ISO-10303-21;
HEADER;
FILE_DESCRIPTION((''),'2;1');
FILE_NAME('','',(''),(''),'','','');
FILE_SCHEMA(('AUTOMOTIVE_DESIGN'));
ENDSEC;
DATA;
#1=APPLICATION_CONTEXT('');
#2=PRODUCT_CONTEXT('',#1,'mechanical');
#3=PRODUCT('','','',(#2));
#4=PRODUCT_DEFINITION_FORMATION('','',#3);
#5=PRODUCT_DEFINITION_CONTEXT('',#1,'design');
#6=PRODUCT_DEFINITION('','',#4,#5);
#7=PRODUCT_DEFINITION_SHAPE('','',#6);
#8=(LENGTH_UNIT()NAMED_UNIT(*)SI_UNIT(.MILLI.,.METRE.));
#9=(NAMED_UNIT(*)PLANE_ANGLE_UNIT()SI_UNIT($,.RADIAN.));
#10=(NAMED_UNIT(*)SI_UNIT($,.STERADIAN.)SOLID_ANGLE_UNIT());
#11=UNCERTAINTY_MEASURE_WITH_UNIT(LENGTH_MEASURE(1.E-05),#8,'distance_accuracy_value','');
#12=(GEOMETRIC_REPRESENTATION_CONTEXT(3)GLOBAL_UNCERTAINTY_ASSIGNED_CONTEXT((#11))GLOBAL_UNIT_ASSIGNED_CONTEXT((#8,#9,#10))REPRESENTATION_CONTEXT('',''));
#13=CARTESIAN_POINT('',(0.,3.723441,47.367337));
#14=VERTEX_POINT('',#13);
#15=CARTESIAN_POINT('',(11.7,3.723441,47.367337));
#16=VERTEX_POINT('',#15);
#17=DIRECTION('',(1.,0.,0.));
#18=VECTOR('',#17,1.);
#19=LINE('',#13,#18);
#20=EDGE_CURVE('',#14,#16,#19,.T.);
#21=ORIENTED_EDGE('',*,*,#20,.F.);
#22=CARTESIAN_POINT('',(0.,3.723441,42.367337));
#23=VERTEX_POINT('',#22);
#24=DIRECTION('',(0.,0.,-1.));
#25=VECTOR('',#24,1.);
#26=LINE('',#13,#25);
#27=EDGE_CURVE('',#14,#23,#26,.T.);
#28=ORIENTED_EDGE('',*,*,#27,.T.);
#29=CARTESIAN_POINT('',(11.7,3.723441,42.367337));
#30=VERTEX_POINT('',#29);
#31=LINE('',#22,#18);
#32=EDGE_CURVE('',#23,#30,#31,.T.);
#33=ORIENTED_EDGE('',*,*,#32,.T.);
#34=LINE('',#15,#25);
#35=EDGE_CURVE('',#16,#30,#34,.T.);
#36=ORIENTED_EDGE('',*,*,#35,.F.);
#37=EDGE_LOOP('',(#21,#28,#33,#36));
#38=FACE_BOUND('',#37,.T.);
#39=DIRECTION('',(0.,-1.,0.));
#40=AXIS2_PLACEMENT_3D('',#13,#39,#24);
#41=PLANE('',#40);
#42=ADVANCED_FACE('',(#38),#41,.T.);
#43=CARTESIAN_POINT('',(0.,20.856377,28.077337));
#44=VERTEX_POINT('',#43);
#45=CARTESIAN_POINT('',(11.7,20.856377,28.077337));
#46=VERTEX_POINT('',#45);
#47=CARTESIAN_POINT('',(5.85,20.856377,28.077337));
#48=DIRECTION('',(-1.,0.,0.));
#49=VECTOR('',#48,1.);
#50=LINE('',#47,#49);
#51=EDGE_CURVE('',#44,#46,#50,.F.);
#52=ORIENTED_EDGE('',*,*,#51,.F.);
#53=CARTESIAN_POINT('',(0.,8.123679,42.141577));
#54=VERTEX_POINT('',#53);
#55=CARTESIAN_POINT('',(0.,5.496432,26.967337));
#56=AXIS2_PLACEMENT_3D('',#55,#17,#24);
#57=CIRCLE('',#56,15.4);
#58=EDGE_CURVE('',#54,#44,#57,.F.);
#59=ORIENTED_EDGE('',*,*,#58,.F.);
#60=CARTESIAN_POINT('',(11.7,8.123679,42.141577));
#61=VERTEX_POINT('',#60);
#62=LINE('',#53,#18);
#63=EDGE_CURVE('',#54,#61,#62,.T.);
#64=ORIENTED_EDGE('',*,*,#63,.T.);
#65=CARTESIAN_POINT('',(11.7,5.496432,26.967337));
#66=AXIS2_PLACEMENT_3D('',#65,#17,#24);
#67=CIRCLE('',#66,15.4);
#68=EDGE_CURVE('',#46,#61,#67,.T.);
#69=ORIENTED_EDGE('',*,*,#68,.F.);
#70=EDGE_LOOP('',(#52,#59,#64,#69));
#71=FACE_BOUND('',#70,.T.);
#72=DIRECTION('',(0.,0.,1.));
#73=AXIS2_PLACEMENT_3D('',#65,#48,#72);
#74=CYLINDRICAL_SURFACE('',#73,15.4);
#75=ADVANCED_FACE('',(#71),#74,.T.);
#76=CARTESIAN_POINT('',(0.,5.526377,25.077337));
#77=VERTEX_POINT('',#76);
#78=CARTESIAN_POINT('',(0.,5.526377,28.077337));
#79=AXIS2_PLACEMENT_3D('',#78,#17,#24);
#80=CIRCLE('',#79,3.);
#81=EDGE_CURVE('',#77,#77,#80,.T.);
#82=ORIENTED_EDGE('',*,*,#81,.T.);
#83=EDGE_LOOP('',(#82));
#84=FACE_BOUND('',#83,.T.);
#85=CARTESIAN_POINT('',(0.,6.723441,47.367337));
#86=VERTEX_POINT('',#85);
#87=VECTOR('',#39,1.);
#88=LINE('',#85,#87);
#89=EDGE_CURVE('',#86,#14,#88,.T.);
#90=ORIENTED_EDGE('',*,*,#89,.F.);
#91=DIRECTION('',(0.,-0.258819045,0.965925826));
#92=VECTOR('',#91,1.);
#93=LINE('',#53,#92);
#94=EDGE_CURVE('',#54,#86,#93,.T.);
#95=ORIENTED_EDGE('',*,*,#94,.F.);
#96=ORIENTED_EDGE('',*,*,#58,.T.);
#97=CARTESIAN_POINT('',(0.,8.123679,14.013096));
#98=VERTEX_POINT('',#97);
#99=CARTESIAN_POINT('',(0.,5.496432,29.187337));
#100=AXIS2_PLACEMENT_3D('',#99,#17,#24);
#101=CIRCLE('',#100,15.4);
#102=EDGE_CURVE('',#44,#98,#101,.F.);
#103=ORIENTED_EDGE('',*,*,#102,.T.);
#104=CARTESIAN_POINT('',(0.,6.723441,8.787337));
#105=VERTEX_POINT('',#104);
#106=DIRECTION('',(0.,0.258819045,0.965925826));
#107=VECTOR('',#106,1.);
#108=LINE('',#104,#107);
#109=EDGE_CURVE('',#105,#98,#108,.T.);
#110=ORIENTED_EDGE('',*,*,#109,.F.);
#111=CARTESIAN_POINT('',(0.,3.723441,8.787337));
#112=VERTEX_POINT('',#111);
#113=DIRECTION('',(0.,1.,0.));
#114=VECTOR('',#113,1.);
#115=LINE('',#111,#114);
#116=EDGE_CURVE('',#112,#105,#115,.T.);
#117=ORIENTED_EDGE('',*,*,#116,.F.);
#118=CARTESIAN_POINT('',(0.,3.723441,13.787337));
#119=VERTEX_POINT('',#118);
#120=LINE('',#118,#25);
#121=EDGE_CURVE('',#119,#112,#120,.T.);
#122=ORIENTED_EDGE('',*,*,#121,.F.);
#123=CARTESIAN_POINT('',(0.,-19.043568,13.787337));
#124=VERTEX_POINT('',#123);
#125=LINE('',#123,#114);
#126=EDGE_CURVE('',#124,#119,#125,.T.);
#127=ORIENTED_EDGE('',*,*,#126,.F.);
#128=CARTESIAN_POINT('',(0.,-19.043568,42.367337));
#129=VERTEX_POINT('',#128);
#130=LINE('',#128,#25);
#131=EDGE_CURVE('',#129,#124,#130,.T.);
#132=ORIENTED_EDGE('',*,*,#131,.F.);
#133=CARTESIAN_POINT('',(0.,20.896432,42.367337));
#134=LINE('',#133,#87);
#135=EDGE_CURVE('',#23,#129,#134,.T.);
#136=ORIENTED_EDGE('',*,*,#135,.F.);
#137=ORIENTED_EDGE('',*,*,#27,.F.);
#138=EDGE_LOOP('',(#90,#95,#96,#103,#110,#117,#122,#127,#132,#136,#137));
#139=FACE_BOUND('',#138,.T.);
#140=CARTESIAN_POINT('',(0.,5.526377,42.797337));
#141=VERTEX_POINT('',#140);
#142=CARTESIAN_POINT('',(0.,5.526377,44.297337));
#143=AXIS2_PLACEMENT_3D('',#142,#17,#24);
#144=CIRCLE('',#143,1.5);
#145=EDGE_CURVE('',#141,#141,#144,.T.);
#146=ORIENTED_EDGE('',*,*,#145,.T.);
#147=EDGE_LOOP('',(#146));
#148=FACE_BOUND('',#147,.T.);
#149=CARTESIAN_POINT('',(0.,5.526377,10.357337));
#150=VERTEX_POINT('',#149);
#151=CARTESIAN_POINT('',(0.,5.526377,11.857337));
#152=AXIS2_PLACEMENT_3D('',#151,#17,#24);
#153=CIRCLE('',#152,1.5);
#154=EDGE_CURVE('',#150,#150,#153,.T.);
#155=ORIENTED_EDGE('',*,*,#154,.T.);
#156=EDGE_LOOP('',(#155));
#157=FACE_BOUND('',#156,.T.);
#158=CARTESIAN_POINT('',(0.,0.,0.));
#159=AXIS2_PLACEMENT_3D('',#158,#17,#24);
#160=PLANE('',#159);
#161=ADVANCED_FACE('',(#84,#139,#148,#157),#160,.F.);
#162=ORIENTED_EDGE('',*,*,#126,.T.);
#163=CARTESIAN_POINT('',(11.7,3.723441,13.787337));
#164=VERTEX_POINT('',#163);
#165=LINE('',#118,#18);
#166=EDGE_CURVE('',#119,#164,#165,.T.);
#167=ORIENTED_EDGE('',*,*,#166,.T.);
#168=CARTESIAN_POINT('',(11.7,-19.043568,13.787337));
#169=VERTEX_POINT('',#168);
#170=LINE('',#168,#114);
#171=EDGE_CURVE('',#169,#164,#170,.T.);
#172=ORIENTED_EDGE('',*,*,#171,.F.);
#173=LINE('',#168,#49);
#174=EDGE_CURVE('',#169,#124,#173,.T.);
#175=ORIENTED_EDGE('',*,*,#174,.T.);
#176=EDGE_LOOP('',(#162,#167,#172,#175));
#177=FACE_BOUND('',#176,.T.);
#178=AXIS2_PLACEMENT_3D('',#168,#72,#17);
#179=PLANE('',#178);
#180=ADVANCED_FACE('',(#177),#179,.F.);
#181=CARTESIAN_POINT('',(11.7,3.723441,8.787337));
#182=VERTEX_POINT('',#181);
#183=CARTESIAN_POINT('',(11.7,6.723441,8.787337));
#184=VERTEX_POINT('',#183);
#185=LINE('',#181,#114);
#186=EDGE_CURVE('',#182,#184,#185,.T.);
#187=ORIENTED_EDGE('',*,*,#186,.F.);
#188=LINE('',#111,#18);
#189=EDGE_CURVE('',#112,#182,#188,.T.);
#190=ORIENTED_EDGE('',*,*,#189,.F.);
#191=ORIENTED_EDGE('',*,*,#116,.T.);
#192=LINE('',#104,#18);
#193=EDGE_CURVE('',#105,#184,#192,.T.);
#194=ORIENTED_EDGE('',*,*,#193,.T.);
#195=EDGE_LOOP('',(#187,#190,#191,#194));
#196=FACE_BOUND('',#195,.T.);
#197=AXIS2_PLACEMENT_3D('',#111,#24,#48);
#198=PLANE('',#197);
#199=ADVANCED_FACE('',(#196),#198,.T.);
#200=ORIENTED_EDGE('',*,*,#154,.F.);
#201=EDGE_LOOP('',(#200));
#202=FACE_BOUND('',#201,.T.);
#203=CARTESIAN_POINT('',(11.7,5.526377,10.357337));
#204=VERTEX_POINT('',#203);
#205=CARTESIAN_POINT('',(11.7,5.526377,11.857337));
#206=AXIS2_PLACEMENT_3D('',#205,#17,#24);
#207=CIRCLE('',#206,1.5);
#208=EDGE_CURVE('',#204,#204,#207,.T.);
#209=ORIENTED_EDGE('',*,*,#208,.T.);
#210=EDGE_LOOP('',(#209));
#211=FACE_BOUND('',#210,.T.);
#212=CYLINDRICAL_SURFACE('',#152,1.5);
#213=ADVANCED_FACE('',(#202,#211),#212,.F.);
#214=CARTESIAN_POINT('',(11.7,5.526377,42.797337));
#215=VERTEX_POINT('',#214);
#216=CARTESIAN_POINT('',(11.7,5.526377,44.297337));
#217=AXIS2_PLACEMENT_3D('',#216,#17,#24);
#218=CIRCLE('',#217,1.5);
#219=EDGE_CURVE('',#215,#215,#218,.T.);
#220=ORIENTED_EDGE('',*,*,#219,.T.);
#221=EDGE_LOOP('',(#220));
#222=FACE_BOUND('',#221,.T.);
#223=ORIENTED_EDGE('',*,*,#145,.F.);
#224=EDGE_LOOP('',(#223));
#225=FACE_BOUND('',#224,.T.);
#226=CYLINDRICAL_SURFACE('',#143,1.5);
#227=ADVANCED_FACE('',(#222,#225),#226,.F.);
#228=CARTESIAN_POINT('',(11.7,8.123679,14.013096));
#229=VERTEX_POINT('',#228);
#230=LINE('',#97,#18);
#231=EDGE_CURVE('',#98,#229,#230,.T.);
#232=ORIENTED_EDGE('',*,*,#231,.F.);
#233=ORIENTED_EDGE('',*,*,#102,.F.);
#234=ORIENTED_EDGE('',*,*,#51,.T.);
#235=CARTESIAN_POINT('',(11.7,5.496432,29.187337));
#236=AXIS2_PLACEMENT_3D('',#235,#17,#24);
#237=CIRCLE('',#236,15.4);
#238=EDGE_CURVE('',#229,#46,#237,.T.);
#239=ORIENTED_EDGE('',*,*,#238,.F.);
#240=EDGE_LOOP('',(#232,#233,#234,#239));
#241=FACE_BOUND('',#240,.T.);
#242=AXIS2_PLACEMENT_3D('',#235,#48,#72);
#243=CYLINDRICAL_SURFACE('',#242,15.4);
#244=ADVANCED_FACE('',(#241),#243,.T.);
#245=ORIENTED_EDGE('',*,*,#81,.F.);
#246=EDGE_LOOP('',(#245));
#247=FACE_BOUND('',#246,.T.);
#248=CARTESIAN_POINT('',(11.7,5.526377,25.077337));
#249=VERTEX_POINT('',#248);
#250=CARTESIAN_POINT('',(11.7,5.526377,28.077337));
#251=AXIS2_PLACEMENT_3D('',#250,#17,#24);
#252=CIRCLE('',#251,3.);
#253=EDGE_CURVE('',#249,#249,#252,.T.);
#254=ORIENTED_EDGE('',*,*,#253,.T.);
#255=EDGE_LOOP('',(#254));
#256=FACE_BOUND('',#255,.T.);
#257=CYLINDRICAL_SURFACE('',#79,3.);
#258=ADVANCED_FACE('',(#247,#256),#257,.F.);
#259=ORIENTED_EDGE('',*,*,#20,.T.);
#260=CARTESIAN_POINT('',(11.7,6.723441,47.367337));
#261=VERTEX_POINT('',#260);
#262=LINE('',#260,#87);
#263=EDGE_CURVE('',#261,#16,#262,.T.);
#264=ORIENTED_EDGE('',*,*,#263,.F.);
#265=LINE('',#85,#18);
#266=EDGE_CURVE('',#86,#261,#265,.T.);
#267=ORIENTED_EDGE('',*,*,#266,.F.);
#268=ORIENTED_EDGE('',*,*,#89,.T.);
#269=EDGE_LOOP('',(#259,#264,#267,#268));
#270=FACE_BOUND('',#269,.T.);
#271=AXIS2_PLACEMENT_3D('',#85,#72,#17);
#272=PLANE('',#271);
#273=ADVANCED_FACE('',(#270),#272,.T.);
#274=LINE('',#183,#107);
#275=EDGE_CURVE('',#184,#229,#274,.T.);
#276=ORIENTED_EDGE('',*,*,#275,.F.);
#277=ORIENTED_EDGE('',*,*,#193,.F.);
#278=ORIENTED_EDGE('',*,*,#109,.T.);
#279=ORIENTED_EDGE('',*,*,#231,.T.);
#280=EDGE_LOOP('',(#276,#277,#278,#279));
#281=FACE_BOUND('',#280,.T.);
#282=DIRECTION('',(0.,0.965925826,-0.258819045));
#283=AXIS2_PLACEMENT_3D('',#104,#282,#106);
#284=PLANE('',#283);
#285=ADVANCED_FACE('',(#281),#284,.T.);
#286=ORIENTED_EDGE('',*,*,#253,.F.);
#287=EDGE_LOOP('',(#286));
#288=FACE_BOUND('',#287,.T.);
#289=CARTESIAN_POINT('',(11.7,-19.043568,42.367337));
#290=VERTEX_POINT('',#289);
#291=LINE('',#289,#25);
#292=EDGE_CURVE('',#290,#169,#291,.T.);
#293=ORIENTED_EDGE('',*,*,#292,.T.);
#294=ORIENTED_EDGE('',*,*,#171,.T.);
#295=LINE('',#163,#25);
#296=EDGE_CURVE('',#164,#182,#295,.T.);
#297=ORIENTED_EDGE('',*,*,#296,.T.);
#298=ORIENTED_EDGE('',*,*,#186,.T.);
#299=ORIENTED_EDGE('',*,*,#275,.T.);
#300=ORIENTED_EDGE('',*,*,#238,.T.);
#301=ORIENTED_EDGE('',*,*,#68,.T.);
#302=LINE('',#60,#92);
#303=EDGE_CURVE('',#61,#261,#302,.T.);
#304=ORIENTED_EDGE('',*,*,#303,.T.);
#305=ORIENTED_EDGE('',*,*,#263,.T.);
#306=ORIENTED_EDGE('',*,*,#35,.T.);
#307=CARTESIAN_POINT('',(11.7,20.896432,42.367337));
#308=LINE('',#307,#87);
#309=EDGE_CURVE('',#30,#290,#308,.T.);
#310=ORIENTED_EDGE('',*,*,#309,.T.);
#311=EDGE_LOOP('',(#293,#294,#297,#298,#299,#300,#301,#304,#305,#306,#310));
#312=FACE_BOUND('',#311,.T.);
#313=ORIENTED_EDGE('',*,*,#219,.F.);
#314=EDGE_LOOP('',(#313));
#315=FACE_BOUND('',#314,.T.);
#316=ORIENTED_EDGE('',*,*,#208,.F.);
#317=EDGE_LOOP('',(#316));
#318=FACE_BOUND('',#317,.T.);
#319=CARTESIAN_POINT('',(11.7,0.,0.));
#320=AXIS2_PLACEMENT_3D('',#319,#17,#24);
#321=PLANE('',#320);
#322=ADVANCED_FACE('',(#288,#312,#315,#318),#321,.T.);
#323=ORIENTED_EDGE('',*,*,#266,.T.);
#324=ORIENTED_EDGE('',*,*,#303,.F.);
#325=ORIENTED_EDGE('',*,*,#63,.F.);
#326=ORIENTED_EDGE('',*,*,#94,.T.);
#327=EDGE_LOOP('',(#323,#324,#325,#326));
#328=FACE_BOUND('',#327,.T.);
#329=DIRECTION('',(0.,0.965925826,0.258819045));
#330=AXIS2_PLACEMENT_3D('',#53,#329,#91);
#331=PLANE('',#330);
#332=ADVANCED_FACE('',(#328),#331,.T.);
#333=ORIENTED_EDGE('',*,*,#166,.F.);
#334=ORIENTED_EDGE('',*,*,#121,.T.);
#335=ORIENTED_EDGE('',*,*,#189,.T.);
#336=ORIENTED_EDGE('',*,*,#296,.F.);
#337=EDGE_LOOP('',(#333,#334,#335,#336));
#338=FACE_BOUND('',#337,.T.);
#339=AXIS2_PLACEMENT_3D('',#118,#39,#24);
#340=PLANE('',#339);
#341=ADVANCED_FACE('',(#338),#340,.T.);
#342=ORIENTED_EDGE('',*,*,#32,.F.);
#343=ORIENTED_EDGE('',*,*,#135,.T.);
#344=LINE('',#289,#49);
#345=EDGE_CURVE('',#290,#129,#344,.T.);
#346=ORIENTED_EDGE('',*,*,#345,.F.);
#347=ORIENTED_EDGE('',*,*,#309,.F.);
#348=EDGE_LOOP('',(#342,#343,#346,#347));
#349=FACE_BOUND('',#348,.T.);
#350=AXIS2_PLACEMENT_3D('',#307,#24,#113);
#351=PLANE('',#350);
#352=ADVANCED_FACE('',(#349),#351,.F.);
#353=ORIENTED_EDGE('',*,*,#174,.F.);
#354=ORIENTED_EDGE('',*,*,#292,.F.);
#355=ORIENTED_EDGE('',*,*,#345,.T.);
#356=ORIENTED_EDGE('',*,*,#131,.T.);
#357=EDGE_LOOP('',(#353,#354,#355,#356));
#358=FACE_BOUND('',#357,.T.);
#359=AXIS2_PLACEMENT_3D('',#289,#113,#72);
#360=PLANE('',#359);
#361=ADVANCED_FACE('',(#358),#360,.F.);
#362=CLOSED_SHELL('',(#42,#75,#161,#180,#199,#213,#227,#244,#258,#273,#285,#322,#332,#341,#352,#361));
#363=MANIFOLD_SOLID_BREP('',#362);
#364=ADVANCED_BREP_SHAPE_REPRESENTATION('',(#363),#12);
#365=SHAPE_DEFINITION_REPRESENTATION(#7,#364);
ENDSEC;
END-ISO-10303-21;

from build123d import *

# Parameters (mm, degrees)
SKETCH2_W           = 28.58
SKETCH2_H           = 39.94
BOSS_EXTRUDE1_DEPTH = 11.7
FILLET1_R           = 15.4
BOSS_EXTRUDE2_DEPTH = 11.7
SKETCH3_R           = 1.5
CUT_EXTRUDE1_DEPTH  = 11.7
SKETCH6_R           = 3
CUT_EXTRUDE2_DEPTH  = 11.7


with BuildPart() as part:
    # Sketch2 → Boss-Extrude1 (new body)
    with BuildSketch(Plane(origin=(0, 0, 0), x_dir=(0, 0, -1), z_dir=(1, 0, 0))):
        with Locations((-28.077336683, 0.926432161)):
            Rectangle(SKETCH2_W, SKETCH2_H)
    extrude(amount=BOSS_EXTRUDE1_DEPTH)

    # Fillet1
    # the kernel refuses this fillet: 15.4 mm, written as the material it takes off along each edge
    with BuildSketch(Plane(origin=(-38.5, 20.896432161, 13.787336683), x_dir=(0, -1, 0), z_dir=(1, 0, 0))) as fillet1_piece_1:
        with BuildLine():
            CenterArc((FILLET1_R, -FILLET1_R), FILLET1_R, 90, 90)
            Line((0, -FILLET1_R), (0, 0))
            Line((0, 0), (FILLET1_R, 0))
        make_face()
    extrude(amount=88.7, mode=Mode.SUBTRACT)
    with BuildSketch(Plane(origin=(-38.5, 20.896432161, 42.367336683), x_dir=(0, -1, 0), z_dir=(1, 0, 0))) as fillet1_piece_2:
        with BuildLine():
            CenterArc((FILLET1_R, FILLET1_R), FILLET1_R, 180, 90)
            Line((0, FILLET1_R), (0, 0))
            Line((0, 0), (FILLET1_R, 0))
        make_face()
    extrude(amount=88.7, mode=Mode.SUBTRACT)

    # Sketch5 → Boss-Extrude2 (add)
    with BuildSketch(Plane(origin=(11.7, 0, 0), x_dir=(0, 0, -1), z_dir=(1, 0, 0))):
        Polygon((-42.141577226, 8.123678622), (-47.367336683, 6.723440596), (-47.367336683, 3.723440596), (-42.367336683, 3.723440596), align=None)
        Polygon((-13.787336683, 3.723440596), (-8.787336683, 3.723440596), (-8.787336683, 6.723440596), (-14.013096141, 8.123678622), align=None)
    extrude(amount=-BOSS_EXTRUDE2_DEPTH)

    # Sketch3 → Cut-Extrude1 (cut)
    with BuildSketch(Plane(origin=(11.7, 0, 0), x_dir=(0, 0, -1), z_dir=(1, 0, 0))):
        with Locations((-44.297336683, 5.526376822)):
            Circle(SKETCH3_R)
        with Locations((-11.857336683, 5.526376822)):
            Circle(SKETCH3_R)
    extrude(amount=-CUT_EXTRUDE1_DEPTH, mode=Mode.SUBTRACT)

    # Sketch6 → Cut-Extrude2 (cut)
    with BuildSketch(Plane(origin=(11.7, 0, 0), x_dir=(0, 0, -1), z_dir=(1, 0, 0))):
        with Locations((-28.077336683, 5.526376822)):
            Circle(SKETCH6_R)
    extrude(amount=-CUT_EXTRUDE2_DEPTH, mode=Mode.SUBTRACT)


solid = part.part
